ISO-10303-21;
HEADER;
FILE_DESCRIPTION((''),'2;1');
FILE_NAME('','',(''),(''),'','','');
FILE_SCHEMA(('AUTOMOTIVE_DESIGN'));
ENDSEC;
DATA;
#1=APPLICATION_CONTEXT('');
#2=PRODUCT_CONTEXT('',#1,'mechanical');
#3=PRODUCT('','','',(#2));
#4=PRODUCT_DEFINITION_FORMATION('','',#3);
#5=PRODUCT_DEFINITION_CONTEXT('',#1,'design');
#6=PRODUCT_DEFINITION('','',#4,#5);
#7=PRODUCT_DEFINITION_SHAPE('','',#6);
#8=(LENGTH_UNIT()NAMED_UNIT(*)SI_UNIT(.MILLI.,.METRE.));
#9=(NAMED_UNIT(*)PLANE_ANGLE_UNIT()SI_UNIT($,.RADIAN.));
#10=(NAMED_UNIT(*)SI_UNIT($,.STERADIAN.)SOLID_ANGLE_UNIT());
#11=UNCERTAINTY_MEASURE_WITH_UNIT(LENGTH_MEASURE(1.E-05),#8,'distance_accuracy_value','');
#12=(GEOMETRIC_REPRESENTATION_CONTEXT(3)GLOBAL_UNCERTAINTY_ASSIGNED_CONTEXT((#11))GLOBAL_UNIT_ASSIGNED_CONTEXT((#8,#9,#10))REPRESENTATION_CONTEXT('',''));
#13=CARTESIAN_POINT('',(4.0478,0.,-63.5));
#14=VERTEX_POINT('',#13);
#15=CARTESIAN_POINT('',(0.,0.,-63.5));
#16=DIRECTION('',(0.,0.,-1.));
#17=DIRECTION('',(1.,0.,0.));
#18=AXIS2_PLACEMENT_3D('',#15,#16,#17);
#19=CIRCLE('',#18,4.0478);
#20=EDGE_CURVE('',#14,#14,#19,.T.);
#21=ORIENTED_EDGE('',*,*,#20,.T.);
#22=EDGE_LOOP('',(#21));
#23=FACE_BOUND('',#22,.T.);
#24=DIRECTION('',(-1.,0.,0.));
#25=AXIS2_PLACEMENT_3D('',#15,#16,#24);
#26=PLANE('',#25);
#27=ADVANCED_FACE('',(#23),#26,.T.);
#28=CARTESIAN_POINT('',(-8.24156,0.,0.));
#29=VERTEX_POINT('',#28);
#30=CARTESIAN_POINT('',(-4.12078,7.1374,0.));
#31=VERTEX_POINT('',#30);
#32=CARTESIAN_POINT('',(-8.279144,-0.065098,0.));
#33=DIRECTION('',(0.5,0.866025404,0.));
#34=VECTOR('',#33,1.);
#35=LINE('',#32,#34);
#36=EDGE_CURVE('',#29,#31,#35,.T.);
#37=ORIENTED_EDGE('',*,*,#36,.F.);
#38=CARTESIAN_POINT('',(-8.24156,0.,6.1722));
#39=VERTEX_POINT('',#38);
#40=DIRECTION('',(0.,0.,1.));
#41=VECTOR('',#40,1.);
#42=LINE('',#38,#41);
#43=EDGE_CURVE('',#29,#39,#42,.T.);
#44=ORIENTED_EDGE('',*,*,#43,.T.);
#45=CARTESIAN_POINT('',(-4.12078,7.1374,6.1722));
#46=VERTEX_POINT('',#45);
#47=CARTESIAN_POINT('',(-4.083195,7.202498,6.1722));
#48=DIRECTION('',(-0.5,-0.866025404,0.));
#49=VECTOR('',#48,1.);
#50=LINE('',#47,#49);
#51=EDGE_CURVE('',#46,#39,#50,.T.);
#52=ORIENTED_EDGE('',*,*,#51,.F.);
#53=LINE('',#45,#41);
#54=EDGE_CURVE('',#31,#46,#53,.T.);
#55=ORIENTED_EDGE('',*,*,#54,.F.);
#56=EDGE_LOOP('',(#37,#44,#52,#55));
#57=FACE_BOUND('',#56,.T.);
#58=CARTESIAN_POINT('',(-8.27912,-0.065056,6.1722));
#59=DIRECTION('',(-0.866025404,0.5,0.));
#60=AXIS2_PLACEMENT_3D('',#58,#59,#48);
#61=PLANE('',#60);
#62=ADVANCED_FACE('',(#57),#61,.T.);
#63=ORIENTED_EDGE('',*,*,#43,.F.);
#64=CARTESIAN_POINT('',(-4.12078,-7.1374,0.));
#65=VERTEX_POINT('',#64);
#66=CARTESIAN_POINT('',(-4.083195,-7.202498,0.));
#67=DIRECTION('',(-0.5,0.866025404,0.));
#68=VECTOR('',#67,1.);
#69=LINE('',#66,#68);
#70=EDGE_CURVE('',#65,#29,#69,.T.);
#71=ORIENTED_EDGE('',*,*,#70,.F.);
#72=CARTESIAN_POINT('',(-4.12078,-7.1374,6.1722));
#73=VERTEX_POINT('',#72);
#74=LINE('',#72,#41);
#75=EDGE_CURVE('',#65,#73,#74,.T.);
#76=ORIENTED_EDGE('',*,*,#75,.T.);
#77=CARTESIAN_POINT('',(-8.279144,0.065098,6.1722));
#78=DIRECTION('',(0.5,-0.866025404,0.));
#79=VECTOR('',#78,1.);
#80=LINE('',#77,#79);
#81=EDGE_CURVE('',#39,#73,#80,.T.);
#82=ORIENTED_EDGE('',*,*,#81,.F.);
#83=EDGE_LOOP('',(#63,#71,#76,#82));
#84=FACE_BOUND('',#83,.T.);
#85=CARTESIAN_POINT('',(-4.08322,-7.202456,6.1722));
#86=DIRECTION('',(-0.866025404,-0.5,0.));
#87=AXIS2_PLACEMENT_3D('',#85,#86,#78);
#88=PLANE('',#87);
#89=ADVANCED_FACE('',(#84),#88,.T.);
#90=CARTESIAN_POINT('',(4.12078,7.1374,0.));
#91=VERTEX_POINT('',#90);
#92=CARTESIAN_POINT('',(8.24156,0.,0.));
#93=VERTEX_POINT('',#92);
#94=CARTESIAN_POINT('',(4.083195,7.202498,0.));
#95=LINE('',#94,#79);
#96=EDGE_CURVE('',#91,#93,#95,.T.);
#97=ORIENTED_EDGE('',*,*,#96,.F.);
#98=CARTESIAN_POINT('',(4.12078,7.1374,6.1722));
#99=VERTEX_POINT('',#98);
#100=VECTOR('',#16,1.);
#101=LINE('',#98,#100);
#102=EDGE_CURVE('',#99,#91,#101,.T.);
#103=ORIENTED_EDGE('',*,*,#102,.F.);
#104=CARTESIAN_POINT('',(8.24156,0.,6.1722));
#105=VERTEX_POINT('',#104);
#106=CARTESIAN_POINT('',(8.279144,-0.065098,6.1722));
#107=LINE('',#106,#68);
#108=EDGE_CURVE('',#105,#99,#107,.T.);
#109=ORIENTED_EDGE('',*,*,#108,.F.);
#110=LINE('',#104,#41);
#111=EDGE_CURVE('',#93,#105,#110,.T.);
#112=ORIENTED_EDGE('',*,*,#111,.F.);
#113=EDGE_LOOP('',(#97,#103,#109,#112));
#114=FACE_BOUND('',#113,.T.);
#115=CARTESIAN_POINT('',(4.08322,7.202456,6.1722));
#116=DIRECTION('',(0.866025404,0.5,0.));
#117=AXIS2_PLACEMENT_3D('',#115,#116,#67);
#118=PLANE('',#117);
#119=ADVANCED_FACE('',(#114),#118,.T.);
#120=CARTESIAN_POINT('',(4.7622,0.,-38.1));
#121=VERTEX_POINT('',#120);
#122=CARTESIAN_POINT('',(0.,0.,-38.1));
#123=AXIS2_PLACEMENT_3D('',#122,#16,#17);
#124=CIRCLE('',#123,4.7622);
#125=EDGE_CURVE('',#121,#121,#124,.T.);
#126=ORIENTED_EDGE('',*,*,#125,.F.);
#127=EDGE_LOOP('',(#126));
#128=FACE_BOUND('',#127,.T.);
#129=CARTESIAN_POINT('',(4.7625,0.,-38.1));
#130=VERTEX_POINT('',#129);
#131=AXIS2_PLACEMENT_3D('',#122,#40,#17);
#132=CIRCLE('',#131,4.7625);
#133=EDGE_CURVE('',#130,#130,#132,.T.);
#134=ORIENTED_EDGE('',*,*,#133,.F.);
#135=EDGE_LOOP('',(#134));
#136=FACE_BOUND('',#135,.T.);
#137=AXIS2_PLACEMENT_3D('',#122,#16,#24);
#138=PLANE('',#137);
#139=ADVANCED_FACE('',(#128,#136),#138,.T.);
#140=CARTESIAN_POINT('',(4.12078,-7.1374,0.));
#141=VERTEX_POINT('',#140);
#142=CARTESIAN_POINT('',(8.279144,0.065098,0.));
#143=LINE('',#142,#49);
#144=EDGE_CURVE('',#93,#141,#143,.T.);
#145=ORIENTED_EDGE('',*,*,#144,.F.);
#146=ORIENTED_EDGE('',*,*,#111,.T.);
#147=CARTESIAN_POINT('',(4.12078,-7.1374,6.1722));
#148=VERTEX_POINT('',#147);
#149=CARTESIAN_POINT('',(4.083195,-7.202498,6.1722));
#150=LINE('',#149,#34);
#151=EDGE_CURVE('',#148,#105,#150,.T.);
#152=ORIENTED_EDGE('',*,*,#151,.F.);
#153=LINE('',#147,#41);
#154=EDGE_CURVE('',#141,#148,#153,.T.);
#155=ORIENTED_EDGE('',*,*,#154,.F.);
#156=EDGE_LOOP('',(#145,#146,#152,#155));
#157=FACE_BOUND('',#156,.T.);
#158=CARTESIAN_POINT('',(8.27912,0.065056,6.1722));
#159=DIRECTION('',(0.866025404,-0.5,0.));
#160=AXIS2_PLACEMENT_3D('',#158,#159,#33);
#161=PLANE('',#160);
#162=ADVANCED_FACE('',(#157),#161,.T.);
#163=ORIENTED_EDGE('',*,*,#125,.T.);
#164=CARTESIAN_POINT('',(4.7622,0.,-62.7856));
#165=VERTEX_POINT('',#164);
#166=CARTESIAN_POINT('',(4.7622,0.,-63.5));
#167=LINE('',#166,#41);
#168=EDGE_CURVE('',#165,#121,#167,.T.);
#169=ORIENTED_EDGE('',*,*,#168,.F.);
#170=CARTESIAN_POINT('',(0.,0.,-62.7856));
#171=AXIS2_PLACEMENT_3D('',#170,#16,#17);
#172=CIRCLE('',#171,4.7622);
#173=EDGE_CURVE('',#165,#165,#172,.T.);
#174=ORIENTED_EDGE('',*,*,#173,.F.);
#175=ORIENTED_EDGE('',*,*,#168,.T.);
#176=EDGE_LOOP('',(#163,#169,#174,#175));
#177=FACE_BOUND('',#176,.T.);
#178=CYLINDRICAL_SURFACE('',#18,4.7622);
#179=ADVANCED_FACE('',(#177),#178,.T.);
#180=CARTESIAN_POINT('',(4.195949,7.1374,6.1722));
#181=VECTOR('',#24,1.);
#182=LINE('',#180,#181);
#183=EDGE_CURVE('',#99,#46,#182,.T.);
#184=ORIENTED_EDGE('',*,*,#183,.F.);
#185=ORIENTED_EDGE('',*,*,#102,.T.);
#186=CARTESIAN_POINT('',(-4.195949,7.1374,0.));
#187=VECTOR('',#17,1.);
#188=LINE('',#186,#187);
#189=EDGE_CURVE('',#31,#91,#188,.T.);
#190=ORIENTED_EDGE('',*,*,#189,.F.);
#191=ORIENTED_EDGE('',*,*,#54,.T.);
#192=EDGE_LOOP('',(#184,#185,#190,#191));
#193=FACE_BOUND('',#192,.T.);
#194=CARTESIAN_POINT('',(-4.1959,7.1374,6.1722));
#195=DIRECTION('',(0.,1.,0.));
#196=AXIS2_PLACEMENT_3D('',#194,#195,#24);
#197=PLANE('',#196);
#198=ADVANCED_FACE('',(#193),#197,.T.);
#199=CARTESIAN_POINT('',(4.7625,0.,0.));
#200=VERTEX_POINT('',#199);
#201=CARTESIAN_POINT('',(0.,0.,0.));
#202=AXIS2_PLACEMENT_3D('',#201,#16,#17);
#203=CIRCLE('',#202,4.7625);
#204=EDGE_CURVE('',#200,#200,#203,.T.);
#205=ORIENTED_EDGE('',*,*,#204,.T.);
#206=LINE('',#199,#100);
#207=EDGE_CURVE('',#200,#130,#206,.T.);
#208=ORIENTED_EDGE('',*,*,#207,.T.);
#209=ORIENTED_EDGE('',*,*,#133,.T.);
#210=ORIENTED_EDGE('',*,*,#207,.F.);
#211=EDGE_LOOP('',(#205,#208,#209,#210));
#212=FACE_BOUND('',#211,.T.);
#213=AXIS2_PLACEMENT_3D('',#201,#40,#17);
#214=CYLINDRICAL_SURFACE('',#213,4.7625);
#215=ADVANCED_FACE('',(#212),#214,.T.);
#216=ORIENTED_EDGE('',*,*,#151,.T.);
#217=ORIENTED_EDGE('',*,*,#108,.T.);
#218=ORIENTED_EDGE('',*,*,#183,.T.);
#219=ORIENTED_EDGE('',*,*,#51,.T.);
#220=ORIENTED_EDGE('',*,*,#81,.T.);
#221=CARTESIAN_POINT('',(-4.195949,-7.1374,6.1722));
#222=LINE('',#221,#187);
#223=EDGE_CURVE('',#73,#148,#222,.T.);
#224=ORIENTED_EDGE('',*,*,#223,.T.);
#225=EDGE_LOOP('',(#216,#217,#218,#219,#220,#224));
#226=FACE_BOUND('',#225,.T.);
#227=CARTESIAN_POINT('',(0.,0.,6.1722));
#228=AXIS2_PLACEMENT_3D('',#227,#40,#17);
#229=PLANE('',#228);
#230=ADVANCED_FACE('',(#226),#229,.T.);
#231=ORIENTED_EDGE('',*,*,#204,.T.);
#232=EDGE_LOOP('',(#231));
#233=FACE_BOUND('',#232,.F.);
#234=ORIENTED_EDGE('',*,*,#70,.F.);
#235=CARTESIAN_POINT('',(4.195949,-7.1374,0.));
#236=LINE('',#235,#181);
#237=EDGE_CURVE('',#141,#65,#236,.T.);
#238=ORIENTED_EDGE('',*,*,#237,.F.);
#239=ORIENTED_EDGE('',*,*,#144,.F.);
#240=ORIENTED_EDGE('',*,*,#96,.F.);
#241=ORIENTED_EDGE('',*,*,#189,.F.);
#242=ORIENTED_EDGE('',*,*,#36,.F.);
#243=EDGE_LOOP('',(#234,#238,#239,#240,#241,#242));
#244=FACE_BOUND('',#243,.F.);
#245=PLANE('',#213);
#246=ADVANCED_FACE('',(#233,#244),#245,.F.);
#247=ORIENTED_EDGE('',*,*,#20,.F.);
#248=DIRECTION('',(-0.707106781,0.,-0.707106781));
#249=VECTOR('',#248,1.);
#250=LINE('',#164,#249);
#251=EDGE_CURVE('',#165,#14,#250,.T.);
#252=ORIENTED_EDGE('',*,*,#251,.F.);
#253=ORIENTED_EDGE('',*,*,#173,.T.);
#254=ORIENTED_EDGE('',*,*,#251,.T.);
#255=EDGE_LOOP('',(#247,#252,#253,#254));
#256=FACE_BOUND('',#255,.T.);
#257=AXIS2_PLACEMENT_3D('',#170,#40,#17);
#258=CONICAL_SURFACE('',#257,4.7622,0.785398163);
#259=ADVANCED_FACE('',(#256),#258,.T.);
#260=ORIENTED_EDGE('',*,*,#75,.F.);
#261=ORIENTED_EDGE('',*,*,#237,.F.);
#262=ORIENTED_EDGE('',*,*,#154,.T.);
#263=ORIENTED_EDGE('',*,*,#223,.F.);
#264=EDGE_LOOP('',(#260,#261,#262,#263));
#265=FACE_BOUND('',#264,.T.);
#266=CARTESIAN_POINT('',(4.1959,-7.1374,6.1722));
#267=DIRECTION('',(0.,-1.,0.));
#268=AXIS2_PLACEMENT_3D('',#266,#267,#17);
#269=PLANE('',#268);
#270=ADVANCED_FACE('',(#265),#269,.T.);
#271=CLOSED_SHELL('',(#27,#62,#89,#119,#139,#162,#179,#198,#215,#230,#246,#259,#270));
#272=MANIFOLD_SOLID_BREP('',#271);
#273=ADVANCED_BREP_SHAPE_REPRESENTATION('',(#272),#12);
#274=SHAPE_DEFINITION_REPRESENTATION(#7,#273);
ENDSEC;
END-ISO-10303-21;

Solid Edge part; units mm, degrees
sketch "Sketch1" plane through (0, 0, 0) normal (0, 0, 1) x (1, 0, 0)
  circle A0 centre (0, 0) radius 8.2794
  dimension "D1" = 16.5588
extrude "Protrusion1" add sketch "Sketch1" along normal blind 6.1722
sketch "Sketch2" plane through (0, 0, 0) normal (0, 0, -1) x (1, 0, 0)
  circle A0 centre (0, 0) radius 4.7625
extrude "Protrusion2" add sketch "Sketch2" along normal blind 63.5
sketch "Sketch3" plane through (0, 0, -63.5) normal (0, 0, -1) x (1, 0, 0)
  circle A0 centre (0, 0) radius 4.7622
extrude "Cutout1" cut sketch "Sketch3" against normal blind 25.4 flip side to cut
chamfer "Chamfer_1" distance 0.7144 angle 45 1 edges at (-4.7622, 0, -63.5)
sketch "Sketch4" plane through (0, 0, 6.1722) normal (0, 0, 1) x (1, 0, 0)
  line L0 (-4.1959, 7.1374) -> (4.1959, 7.1374)
  dimension "D1" = 14.2748
extrude "Cutout2" cut sketch "Sketch4" against normal up to next material side at (0, 7.1874, 6.1722)
pattern_circular "Pattern1" count 6 over 360 about axis through (0, 0, 6.1722) along (0, 0, 1) of "Cutout2"
properties part number "24103135"
